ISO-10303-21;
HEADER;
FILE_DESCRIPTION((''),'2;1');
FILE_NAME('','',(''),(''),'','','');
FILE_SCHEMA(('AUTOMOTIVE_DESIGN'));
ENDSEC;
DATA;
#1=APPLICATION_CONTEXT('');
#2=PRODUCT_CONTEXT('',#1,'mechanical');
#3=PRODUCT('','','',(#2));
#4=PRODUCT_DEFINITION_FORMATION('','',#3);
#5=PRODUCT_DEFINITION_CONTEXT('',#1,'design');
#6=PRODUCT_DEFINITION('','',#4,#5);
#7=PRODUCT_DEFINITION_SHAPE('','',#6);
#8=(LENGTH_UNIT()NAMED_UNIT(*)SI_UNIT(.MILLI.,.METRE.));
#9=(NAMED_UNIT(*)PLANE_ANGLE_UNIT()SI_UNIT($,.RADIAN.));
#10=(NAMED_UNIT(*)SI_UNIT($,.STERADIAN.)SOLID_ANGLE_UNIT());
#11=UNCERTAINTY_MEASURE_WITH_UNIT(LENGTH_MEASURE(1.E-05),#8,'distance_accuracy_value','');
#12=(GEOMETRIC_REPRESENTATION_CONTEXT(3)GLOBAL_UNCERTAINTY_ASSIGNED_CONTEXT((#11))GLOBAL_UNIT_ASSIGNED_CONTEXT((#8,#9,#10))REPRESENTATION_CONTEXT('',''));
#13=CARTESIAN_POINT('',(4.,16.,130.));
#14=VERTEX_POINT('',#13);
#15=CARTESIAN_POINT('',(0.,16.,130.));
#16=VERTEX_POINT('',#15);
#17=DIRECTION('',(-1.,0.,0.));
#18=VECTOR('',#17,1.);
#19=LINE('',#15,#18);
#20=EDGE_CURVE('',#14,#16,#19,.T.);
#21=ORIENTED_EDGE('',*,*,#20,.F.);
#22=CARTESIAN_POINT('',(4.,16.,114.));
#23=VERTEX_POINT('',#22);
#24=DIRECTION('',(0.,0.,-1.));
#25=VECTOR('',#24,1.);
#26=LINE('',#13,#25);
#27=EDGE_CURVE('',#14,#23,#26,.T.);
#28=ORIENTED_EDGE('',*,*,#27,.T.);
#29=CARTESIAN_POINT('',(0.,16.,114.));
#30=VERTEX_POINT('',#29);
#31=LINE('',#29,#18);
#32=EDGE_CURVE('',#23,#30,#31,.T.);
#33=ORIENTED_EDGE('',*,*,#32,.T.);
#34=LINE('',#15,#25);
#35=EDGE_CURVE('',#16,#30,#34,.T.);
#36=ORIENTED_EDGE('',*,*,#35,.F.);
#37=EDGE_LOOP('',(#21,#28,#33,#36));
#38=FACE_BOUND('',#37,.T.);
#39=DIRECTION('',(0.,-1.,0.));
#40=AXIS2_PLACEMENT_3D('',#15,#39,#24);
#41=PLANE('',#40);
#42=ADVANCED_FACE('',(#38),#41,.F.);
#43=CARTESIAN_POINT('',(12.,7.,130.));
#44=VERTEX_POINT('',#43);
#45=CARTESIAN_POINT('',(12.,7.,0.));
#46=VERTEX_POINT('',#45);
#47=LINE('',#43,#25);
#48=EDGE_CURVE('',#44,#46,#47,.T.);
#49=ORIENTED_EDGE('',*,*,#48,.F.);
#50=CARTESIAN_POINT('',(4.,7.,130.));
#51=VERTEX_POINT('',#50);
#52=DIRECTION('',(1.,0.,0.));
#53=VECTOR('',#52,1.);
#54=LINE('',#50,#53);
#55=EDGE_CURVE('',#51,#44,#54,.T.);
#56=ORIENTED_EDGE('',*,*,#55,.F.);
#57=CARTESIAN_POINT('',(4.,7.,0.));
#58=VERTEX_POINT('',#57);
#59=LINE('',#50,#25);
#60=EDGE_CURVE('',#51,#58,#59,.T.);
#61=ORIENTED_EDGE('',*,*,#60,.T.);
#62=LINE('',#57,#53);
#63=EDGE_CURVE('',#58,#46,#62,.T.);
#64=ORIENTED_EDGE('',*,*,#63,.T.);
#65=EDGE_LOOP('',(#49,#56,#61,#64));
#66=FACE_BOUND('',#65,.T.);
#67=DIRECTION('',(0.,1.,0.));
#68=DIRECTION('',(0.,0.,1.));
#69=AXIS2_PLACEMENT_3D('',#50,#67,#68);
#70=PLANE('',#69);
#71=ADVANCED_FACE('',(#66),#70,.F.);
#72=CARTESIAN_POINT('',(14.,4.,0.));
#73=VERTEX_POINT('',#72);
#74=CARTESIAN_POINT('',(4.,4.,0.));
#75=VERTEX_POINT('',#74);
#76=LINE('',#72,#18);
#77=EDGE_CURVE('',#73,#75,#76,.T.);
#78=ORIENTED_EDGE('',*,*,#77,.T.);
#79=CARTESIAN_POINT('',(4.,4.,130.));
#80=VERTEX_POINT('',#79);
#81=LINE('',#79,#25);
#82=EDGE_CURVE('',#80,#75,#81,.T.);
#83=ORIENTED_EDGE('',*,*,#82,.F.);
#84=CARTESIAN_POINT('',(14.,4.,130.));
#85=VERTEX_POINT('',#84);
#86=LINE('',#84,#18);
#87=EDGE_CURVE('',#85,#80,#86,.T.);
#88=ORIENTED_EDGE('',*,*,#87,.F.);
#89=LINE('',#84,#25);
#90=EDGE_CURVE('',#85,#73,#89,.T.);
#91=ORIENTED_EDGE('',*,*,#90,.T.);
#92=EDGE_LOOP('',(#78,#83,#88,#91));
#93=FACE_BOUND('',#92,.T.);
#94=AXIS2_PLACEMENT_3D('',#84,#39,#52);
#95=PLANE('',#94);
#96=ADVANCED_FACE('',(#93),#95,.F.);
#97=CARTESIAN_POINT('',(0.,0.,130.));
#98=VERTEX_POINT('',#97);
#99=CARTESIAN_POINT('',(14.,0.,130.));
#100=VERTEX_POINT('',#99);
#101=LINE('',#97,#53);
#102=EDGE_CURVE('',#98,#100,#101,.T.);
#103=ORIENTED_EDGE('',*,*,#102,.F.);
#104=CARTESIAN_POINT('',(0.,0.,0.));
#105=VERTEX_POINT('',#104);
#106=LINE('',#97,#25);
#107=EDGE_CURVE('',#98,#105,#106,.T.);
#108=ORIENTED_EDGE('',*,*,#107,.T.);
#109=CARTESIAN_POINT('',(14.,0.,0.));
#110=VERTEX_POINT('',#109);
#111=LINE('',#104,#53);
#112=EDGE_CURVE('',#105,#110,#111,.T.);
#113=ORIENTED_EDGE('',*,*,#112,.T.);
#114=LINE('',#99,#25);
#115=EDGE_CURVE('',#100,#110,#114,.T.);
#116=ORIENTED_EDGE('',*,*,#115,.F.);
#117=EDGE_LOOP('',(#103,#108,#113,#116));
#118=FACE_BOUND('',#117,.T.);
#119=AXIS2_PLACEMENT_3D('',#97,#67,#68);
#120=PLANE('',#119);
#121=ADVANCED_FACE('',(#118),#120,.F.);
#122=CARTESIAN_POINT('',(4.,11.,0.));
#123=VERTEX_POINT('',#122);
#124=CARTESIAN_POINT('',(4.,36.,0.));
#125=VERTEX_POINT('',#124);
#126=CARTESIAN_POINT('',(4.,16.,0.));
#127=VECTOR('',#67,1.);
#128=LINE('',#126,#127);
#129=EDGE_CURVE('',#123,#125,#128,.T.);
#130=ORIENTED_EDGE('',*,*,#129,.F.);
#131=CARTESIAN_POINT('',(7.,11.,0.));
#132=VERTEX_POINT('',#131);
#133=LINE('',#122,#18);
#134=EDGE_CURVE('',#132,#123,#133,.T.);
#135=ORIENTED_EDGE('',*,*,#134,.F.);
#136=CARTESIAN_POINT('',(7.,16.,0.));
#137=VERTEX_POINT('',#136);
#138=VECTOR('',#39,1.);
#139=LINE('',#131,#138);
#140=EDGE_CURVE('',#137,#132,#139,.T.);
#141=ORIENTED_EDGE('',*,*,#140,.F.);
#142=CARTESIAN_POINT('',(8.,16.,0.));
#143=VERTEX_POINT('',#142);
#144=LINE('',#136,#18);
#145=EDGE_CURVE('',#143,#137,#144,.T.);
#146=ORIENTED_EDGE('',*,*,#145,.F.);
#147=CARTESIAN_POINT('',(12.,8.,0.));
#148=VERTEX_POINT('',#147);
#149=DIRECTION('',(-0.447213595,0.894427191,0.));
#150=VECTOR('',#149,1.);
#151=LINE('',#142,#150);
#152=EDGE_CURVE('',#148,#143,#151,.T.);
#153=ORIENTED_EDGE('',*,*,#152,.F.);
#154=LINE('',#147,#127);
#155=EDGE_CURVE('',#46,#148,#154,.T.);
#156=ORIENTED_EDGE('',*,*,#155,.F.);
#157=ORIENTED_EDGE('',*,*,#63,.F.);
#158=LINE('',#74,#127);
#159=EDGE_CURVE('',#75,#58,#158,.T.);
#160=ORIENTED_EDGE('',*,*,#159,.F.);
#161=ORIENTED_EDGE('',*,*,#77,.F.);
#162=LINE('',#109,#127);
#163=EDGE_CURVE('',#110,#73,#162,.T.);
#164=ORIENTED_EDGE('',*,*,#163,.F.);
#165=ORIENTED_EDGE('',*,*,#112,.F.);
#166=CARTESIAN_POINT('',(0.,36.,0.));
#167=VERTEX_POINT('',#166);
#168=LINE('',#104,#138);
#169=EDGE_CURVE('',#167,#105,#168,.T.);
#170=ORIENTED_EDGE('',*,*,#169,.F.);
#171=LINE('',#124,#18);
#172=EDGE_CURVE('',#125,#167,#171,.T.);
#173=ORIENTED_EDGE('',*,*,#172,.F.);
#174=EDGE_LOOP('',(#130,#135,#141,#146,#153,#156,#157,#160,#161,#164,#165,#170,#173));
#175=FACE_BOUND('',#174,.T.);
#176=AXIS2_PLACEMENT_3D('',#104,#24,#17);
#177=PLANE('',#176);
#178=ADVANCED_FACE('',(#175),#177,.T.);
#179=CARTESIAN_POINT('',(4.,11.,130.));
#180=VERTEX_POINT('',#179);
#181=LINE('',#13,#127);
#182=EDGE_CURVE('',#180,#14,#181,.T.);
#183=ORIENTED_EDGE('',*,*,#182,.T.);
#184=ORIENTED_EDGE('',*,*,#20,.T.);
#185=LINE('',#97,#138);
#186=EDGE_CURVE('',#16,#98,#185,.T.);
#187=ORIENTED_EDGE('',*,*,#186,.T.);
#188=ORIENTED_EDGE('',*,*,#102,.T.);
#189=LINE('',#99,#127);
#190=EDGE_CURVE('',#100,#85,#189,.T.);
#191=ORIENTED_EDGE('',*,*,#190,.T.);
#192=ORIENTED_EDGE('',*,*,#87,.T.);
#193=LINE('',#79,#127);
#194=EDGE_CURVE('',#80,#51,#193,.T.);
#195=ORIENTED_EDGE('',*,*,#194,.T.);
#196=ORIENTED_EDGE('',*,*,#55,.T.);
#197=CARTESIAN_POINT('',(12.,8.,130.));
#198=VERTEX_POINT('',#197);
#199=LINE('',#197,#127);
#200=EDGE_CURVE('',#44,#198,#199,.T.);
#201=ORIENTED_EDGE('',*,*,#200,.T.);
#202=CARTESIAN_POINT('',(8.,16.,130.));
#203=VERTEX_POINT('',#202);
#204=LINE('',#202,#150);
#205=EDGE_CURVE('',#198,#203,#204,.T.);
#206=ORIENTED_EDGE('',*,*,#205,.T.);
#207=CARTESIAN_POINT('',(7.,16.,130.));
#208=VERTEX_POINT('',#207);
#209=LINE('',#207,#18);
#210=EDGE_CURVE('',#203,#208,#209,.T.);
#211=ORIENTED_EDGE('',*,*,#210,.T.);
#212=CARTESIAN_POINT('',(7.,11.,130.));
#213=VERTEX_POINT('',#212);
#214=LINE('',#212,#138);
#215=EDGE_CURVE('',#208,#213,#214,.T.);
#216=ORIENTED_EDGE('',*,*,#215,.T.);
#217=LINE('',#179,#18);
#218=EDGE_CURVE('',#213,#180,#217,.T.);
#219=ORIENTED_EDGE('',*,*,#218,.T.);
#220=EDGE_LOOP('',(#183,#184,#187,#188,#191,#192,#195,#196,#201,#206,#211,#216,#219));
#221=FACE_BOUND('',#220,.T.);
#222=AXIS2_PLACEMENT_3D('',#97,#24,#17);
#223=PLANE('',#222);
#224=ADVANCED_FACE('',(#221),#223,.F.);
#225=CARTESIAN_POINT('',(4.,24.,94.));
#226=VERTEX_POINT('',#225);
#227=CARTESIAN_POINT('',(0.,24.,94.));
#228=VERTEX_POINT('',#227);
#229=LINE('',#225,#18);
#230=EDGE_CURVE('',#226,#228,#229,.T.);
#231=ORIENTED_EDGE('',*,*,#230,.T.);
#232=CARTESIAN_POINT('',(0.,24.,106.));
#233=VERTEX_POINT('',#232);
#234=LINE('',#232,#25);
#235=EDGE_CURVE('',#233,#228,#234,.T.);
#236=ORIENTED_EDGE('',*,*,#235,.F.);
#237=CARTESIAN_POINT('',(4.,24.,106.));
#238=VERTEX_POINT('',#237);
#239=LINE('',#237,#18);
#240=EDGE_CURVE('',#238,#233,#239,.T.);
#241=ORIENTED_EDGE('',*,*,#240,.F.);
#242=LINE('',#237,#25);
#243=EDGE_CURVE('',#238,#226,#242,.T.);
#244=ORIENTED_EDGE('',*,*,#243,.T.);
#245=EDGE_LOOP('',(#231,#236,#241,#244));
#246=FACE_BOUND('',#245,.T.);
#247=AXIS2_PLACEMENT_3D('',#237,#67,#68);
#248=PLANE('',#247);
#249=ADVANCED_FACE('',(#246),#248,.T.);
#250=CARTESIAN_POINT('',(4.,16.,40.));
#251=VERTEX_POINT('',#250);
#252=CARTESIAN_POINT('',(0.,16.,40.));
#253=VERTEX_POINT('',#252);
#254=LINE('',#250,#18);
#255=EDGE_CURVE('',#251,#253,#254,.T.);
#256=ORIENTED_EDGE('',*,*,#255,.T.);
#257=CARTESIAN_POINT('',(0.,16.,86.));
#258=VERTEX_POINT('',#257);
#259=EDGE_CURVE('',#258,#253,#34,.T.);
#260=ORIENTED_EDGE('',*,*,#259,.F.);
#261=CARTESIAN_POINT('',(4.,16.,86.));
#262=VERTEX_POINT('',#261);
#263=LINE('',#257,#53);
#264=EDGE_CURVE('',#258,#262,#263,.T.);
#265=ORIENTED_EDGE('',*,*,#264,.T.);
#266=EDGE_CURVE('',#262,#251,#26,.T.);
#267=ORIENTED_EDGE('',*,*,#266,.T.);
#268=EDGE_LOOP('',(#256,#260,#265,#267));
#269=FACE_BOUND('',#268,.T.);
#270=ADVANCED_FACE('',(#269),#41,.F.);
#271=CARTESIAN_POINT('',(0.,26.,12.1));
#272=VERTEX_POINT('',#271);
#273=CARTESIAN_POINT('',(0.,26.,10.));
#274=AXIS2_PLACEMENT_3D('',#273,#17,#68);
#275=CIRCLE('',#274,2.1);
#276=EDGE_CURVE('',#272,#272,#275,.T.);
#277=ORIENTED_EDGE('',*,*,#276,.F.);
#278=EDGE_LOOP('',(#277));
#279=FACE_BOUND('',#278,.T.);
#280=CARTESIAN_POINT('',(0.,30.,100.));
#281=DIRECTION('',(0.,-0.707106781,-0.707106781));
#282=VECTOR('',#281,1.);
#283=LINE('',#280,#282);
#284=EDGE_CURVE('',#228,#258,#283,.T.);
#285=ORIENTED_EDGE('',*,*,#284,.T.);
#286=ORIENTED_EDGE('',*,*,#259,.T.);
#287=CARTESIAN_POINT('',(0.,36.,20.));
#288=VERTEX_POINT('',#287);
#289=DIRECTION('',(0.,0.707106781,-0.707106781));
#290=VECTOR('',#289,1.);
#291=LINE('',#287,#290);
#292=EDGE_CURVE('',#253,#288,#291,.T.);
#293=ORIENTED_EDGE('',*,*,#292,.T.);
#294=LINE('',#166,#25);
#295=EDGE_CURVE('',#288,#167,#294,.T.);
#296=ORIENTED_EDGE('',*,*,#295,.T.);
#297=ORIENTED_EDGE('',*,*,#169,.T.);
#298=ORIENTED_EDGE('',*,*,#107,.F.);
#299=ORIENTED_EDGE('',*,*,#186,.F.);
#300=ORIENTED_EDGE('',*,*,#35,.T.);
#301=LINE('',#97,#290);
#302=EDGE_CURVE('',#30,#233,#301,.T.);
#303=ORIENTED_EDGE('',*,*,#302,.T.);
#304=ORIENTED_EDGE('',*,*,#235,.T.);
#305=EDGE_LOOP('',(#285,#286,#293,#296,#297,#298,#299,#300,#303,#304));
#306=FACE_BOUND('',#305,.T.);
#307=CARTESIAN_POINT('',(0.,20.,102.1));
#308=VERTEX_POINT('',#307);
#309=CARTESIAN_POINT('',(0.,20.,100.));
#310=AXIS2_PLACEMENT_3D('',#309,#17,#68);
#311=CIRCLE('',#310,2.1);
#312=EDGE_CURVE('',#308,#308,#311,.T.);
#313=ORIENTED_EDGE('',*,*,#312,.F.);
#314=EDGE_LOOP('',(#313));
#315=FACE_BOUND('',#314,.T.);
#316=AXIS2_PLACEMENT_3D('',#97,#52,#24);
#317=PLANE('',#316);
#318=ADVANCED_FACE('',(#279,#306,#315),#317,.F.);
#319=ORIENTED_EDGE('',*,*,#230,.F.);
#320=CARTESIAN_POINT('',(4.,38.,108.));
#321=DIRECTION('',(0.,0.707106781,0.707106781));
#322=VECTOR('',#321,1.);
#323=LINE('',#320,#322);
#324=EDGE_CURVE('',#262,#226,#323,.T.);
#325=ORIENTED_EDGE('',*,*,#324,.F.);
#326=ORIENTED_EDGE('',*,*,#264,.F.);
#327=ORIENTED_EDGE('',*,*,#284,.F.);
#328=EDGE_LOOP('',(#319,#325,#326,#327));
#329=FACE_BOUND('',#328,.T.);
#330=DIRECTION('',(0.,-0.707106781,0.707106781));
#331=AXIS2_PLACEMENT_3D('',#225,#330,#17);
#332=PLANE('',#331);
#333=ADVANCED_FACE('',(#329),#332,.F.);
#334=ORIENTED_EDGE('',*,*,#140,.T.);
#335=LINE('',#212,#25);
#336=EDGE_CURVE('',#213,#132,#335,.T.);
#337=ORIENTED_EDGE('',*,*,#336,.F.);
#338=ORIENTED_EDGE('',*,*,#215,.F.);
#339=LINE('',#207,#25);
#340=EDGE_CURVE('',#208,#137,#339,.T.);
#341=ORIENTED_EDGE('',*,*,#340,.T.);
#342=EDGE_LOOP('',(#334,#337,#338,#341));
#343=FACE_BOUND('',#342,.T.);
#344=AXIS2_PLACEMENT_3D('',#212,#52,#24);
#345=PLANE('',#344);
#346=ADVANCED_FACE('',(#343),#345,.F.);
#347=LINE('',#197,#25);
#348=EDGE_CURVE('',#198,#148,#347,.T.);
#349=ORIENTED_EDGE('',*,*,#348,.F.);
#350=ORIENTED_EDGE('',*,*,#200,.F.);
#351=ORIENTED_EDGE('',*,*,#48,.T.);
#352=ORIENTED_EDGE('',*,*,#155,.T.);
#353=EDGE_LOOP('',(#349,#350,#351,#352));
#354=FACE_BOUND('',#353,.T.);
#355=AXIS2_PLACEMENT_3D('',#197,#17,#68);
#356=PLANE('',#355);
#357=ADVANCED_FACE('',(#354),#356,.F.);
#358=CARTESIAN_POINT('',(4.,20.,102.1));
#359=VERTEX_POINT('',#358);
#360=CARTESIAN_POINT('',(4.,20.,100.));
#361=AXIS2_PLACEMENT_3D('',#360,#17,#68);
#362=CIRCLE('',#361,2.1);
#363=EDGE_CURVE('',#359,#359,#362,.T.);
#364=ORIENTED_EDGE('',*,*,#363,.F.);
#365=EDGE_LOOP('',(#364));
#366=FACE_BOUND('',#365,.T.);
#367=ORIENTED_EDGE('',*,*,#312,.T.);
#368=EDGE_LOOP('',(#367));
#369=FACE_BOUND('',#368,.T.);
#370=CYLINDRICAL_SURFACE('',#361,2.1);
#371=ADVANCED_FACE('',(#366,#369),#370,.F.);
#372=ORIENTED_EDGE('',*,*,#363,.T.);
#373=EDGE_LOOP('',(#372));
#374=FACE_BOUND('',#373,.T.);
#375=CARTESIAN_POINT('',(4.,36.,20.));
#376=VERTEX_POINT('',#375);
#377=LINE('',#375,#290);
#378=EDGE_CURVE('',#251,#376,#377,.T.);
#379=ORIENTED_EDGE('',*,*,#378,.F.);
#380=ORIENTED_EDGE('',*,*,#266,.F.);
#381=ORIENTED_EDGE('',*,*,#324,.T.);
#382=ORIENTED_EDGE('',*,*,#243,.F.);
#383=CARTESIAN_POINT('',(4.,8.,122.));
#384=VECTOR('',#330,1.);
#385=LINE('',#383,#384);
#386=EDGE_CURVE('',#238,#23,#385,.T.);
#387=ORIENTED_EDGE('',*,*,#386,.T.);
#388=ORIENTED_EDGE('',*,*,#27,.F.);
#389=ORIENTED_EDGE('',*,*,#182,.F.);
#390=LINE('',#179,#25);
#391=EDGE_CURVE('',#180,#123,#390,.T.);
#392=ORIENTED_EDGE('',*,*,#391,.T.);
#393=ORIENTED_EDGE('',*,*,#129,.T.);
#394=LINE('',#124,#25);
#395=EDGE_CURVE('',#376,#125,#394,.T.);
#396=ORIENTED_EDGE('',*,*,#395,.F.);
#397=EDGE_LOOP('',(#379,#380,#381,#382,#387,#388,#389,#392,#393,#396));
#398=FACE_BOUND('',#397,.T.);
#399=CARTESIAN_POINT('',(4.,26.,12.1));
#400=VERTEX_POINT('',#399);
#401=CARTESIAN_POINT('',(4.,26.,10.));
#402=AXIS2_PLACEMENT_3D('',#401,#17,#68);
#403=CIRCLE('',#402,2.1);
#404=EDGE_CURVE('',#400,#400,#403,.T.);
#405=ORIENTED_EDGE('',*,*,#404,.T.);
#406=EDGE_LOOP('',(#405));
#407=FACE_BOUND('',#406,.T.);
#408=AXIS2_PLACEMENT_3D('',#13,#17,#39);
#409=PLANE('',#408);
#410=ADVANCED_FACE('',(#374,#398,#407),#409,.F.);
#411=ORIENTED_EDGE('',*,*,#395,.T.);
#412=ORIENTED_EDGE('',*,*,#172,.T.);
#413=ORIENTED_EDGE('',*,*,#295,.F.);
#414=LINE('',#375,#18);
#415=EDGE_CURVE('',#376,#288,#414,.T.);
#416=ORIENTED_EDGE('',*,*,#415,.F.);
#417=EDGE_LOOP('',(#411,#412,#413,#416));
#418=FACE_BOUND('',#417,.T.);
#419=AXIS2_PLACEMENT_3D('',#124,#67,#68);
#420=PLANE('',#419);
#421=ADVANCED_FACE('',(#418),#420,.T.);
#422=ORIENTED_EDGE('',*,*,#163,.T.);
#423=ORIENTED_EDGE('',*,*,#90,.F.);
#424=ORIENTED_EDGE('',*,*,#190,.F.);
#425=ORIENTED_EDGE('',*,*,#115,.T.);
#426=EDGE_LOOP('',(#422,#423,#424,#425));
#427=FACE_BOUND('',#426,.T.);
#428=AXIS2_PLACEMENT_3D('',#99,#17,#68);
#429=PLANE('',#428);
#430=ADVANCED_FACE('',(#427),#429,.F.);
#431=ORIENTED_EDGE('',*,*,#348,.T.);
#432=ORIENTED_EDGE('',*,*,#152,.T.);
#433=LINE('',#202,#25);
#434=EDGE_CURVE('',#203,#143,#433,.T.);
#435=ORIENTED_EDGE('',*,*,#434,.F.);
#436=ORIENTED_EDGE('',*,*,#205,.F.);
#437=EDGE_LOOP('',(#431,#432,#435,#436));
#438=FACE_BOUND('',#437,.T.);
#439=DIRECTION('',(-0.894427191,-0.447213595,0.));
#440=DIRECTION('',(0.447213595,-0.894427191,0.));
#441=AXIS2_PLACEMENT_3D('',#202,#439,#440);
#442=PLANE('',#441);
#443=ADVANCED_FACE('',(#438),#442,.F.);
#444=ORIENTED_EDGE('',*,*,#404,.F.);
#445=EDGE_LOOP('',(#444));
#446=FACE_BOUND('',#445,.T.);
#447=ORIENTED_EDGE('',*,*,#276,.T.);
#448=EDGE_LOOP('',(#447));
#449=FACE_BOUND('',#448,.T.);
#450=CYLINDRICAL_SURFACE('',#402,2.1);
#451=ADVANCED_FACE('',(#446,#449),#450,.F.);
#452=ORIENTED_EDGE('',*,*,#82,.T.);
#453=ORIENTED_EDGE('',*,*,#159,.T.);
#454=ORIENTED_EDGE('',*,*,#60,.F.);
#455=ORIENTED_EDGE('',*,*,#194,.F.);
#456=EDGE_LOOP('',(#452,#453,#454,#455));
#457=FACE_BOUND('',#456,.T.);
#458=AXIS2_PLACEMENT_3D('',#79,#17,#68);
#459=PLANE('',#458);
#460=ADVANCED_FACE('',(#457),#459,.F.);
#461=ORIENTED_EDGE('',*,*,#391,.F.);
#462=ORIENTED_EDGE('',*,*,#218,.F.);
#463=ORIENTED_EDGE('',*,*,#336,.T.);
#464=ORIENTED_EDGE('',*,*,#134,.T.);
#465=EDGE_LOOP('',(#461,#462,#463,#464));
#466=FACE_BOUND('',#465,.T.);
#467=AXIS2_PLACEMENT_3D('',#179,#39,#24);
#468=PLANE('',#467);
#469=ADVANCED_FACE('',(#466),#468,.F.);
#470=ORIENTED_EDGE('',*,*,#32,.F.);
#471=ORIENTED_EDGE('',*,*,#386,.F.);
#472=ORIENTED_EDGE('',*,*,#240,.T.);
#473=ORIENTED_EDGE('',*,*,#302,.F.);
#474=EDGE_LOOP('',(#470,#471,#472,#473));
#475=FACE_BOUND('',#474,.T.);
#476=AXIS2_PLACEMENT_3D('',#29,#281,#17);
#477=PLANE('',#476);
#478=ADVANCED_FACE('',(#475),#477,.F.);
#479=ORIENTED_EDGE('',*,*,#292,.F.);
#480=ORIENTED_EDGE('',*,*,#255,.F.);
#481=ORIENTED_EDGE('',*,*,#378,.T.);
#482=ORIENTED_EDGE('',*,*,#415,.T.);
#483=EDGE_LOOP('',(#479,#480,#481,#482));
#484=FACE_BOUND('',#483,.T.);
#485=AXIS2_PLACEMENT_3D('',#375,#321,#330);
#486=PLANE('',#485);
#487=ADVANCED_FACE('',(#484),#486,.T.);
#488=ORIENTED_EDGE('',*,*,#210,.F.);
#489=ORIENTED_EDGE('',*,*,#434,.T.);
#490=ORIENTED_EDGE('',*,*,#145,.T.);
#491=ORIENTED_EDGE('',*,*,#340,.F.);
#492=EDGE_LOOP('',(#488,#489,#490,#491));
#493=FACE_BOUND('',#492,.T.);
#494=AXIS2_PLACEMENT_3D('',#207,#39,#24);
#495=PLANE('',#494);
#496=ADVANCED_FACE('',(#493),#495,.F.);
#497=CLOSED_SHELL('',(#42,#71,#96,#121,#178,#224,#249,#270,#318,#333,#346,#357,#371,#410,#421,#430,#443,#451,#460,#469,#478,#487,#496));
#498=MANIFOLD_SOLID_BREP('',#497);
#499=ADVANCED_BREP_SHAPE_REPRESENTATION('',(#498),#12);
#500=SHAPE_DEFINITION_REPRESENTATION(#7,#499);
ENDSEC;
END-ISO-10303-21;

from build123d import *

# Parameters (mm, degrees)
DODANIE_WYCI_GNI_CIE1_DEPTH = 130
SZKIC2_R                    = 2.1
SZKIC2_W                    = 12
SZKIC2_H                    = 8
DODANIE_WYCI_GNI_CIE2_DEPTH = 4
SFAZOWANIE1_SIZE            = 8


with BuildPart() as part:
    # Szkic1 → Dodanie-wyciągnięcie1 (new body)
    with BuildSketch(Plane.XY):
        Polygon((0, 0), (14, 0), (14, 4), (4, 4), (4, 7), (12, 7), (12, 8), (8, 16), (7, 16), (7, 11), (4, 11), (4, 16), (0, 16), align=None)
    extrude(amount=DODANIE_WYCI_GNI_CIE1_DEPTH)

    # Szkic2 → Dodanie-wyciągnięcie2 (add)
    # profile 1 of 2: a face of its own
    with BuildSketch(Plane.ZY):
        Polygon((20, 36), (40, 16), (20, 16), (0, 16), (0, 36), align=None)
        with Locations((10, 26)):
            Circle(SZKIC2_R, mode=Mode.SUBTRACT)
    # profile 2 of 2: a face of its own
    with BuildSketch(Plane.ZY):
        with Locations((100, 20)):
            Rectangle(SZKIC2_W, SZKIC2_H)
        with Locations((100, 20)):
            Circle(SZKIC2_R, mode=Mode.SUBTRACT)
    extrude(amount=-DODANIE_WYCI_GNI_CIE2_DEPTH)

    # Sfazowanie1
    sfazowanie1_edges = [part.edges().sort_by_distance(p)[0] for p in [
        (2, 16, 94),
        (2, 16, 106),
    ]]
    chamfer(sfazowanie1_edges, length=SFAZOWANIE1_SIZE - 0.0001)  # a hair under: the kernel refuses the full size


solid = part.part
